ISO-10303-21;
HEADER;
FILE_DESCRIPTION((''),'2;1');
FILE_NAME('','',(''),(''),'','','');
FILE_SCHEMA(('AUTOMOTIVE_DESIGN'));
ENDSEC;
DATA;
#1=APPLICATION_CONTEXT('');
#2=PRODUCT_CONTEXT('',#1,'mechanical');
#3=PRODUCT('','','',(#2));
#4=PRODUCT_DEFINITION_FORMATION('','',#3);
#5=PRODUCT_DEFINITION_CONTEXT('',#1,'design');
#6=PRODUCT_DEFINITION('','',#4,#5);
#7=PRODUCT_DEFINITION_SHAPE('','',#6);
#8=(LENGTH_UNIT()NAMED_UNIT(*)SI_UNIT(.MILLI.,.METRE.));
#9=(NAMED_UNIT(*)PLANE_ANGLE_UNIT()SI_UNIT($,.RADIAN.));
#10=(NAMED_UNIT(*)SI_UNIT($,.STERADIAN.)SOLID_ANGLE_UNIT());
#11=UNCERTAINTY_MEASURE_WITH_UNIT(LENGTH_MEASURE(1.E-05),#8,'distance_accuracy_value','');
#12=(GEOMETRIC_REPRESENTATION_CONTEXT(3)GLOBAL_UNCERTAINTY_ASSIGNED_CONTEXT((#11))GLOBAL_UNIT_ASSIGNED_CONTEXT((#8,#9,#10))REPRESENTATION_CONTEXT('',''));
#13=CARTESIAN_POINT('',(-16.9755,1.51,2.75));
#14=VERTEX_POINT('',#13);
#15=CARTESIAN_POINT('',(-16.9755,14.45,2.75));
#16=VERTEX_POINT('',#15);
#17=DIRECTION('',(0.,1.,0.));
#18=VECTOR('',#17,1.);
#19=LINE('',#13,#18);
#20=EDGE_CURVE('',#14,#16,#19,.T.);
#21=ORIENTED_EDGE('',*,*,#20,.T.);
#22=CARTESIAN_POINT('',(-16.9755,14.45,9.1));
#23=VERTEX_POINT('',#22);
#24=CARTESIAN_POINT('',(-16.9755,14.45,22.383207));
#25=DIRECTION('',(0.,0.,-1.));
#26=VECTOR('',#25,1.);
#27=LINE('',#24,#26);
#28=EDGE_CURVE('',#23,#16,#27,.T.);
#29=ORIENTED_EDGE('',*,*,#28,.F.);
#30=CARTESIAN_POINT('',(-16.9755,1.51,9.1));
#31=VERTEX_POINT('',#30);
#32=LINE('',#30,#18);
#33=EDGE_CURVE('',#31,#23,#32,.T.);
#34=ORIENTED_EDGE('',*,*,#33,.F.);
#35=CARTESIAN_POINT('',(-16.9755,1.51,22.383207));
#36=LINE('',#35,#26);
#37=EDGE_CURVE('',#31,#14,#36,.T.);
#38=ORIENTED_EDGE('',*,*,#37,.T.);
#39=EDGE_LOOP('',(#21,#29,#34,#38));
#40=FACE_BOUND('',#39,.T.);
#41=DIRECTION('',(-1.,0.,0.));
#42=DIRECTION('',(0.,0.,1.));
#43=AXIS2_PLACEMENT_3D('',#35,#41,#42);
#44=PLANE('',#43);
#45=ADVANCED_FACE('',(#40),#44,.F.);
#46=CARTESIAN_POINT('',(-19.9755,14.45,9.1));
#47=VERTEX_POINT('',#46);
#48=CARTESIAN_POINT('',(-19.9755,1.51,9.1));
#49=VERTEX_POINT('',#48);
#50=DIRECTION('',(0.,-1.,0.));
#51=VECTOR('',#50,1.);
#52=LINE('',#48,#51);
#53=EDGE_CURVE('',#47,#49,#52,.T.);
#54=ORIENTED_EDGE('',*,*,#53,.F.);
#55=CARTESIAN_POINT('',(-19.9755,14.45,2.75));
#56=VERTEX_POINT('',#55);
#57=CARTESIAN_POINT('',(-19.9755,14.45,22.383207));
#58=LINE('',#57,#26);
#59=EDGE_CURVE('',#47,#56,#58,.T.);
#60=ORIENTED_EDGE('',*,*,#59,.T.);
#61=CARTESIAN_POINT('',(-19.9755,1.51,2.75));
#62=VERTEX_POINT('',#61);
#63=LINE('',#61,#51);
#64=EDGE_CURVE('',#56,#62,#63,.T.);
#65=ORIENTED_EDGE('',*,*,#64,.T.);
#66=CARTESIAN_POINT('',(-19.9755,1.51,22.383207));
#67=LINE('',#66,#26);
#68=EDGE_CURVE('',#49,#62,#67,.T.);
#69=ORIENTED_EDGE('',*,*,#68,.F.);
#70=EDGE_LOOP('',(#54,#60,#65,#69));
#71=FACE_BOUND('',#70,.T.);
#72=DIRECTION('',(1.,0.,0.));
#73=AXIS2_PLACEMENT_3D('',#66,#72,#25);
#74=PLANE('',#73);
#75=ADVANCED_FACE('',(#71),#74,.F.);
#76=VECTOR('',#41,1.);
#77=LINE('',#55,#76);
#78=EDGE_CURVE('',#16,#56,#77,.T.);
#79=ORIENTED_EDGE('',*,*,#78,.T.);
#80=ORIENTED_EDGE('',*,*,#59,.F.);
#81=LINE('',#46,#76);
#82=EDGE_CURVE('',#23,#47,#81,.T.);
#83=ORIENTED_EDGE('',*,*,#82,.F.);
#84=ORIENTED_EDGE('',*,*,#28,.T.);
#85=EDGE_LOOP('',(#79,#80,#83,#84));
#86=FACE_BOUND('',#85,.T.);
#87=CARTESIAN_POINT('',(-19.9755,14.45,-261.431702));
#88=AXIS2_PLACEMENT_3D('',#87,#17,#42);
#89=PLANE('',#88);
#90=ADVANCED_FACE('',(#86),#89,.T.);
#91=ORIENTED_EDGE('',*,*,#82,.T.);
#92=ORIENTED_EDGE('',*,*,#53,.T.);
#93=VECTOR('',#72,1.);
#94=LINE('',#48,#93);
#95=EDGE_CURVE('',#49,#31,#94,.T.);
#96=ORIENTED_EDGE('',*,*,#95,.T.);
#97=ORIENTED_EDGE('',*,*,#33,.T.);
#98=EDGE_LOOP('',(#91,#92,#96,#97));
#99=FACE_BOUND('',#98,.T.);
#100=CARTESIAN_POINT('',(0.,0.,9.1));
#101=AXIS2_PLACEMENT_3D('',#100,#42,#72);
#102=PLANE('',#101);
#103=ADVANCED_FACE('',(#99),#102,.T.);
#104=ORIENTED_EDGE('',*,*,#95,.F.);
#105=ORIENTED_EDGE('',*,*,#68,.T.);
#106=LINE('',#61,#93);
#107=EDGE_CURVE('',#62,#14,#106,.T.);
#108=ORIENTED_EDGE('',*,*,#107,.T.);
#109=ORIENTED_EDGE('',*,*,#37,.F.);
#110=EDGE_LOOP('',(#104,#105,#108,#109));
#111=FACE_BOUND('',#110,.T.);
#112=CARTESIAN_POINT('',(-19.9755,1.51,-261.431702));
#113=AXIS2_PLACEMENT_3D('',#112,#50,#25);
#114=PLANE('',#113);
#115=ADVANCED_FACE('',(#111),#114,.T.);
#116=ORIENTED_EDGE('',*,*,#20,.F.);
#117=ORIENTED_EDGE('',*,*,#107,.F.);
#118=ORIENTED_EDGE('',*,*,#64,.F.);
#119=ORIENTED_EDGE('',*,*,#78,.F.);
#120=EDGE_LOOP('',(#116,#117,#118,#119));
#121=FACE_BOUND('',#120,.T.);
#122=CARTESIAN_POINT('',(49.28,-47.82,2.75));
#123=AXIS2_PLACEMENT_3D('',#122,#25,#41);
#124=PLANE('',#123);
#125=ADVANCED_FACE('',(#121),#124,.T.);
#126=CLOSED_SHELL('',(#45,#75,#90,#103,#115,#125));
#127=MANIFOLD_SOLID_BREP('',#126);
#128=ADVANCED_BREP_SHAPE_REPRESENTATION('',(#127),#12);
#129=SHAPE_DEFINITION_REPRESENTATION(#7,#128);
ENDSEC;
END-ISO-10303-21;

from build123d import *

# Parameters (mm, degrees)
SKETCH1_W                                    = 184.15
SKETCH1_H                                    = 184.15
PANEL_DEPTH                                  = 2.75
LED_HOLE_REACH                               = 132.243
SKETCH19_R                                   = 2.75
LED_HOLES_PATTERN_COUNT                      = 13
LED_HOLES_PATTERN_PITCH                      = 12.319
LED_HOLES_PATTERN_COUNT_DIR2                 = 10
LED_HOLES_PATTERN_PITCH_DIR2                 = 15.94
SKETCH2_R                                    = 2.75
SKETCH2_W                                    = 4.99243385
SKETCH2_H                                    = 2.307727076
CORNER_LEDS_LIGHT_SENSOR_CUT_DEPTH           = 131.242749318
LIGHT_SENSOR_HOLDER_DEPTH                    = 2.4
SKETCH6_W                                    = 164.47360298
SKETCH6_H                                    = 161.542860252
OUTER_LIGHT_WALLS_DEPTH                      = 6.35
SKETCH7_W                                    = 158.47360298
SKETCH7_H                                    = 155.542860252
OUTER_LIGHT_WALLS_CUT_DEPTH                  = 7.5
SKETCH8_W                                    = 158.47560298
SKETCH8_H                                    = 3
INNER_H_WALLS_DEPTH                          = 7.5
INNER_H_WALLS_PATTERN_COUNT                  = 9
INNER_H_WALLS_PATTERN_PITCH                  = 15.94
INNER_START                                  = -1.15
INNER_V_WALLS_1ST_LINE_DEPTH                 = 7.5
INNER_V_WALLS_PATTERN_1ST_LINE_COUNT         = 12
INNER_V_WALLS_PATTERN_1ST_LINE_PITCH         = 12.32
SKETCH13_W                                   = 3
SKETCH13_H                                   = 12.501430126
EXTRA_V_WALLS_REMOVAL_1ST_LINE_DEPTH         = 7.5
SKETCH14_W                                   = 3
SKETCH14_H                                   = 12.94
INNER_V_WALLS_DEPTH                          = 6.35
INNER_V_WALLS_PATTERN_COUNT                  = 12
INNER_V_WALLS_PATTERN_PITCH                  = 12.32
INNER_V_WALLS_PATTERN_COUNT_DIR2             = 9
INNER_V_WALLS_PATTERN_PITCH_DIR2             = 15.94
SKETCH15_W                                   = 3
SKETCH15_H                                   = 12.94
EXTRA_V_WALLS_REMOVAL_DEPTH                  = 7.5
SKETCH16_W                                   = 6.43819851
SKETCH16_H                                   = 3
SKETCH16_W_2                                 = 3
SKETCH16_H_2                                 = 7.903569874
CORNER_LED_LIGHT_BAFFLES_DEPTH               = 6.35
CORNER_LED_LIGHT_BAFFLES_MIRROR_2_COPY_1_W   = 6.43819851
CORNER_LED_LIGHT_BAFFLES_MIRROR_2_COPY_1_H   = 3
CORNER_LED_LIGHT_BAFFLES_MIRROR_2_COPY_1_W_2 = 3
CORNER_LED_LIGHT_BAFFLES_MIRROR_2_COPY_1_H_2 = 7.903569874
CORNER_LED_LIGHT_BAFFLES_MIRROR_2_CO_2_DEPTH = 6.35
LED_STRIP_SQUARE_HOLE_1ST_LINE_REACH         = 132.43
SKETCH20_W                                   = 5.5
SKETCH20_H                                   = 5.5
LED_STRIP_SQUARE_HOLE_REACH                  = 132.43
SKETCH22_W                                   = 5.5
SKETCH22_H                                   = 5.5
LED_STRIP_SQUARE_HOLES_PATTERN_COUNT         = 13
LED_STRIP_SQUARE_HOLES_PATTERN_PITCH         = 12.319
LED_STRIP_SQUARE_HOLES_PATTERN_COUNT_DIR2    = 6
LED_STRIP_SQUARE_HOLES_PATTERN_PITCH_DIR2    = 15.94
SKETCH27_W                                   = 149.47360298
SKETCH27_H                                   = 7.903569874
SKETCH27_W_2                                 = 6.43819851
SKETCH27_H_2                                 = 146.542860252
CUT_EXTRUDE15_DEPTH                          = 1
CHAMFER1_SIZE                                = 1
SKETCH30_OUTSIDE_W                           = 238.268
SKETCH30_OUTSIDE_H                           = 238.268
SKETCH30_OUTSIDE_W_2                         = 3
SKETCH30_OUTSIDE_H_2                         = 12.94
CUT_EXTRUDE24_DEPTH                          = 7.5


with BuildPart() as part:
    # Sketch1 → panel (new body)
    with BuildSketch(Plane.XY):
        Rectangle(SKETCH1_W, SKETCH1_H)
    extrude(amount=PANEL_DEPTH)

    # Sketch19 → LED hole (cut, up to next)
    with BuildSketch(Plane.XY.offset(2.75), mode=Mode.PRIVATE) as led_hole_sk1:
        with Locations((-73.915, 71.74)):
            Circle(SKETCH19_R)
    led_hole_tool1 = extrude(led_hole_sk1.sketch, amount=-LED_HOLE_REACH, mode=Mode.PRIVATE) & part.part
    led_hole = led_hole_tool1.solids().sort_by_distance((-73.915, 71.74, 2.75))[0]
    add(led_hole, mode=Mode.SUBTRACT)

    # LED holes pattern: LED hole 13 × 10, 32 skipped
    with Locations(*[(i * LED_HOLES_PATTERN_PITCH, -j * LED_HOLES_PATTERN_PITCH_DIR2, 0) for i in range(LED_HOLES_PATTERN_COUNT) for j in range(LED_HOLES_PATTERN_COUNT_DIR2) if (i, j) not in ((0, 0), (0, 3), (0, 4), (1, 3), (1, 4), (2, 0), (2, 3), (2, 4), (3, 3), (3, 4), (3, 6), (3, 8), (4, 2), (4, 3), (4, 4), (4, 6), (4, 8), (5, 0), (5, 3), (5, 4), (5, 6), (5, 8), (6, 3), (6, 4), (6, 6), (6, 8), (6, 9), (7, 4), (7, 8), (8, 8), (9, 8), (12, 2), (12, 6))]):
        add(led_hole, mode=Mode.SUBTRACT)

    # Sketch2 → corner LEDs _ light sensor cut (cut, through all)
    with BuildSketch(Plane.XY.offset(2.75)):
        with Locations((-84.075, 84.075)):
            Circle(SKETCH2_R)
        with Locations(Location((84.075, 84.075, 0), (0, 0, 180))):
            Circle(SKETCH2_R)
        with Locations((84.075, -84.075)):
            Circle(SKETCH2_R)
        with Locations(Location((-84.075, -84.075, 0), (0, 0, 180))):
            Circle(SKETCH2_R)
        with Locations((0, 84.075)):
            Rectangle(SKETCH2_W, SKETCH2_H)
    extrude(amount=-CORNER_LEDS_LIGHT_SENSOR_CUT_DEPTH, mode=Mode.SUBTRACT)

    # Sketch3 → light sensor holder (cut)
    with BuildSketch(Plane.XY.offset(2.75)):
        with BuildLine():
            Line((-1.58113883, 81.825), (1.58113883, 81.825))
            ThreePointArc((1.58113883, 81.825), (2.75, 84.075), (1.58113883, 86.325))
            Line((1.58113883, 86.325), (-1.58113883, 86.325))
            ThreePointArc((-1.58113883, 86.325), (-2.75, 84.075), (-1.58113883, 81.825))
        make_face()
    extrude(amount=-LIGHT_SENSOR_HOLDER_DEPTH, mode=Mode.SUBTRACT)

    # Sketch6 → outer light walls (add)
    with BuildSketch(Plane.XY.offset(2.75)):
        Rectangle(SKETCH6_W, SKETCH6_H)
    extrude(amount=OUTER_LIGHT_WALLS_DEPTH)

    # Sketch7 → outer light walls cut (cut)
    with BuildSketch(Plane.XY.offset(9.1)):
        Rectangle(SKETCH7_W, SKETCH7_H)
    extrude(amount=-OUTER_LIGHT_WALLS_CUT_DEPTH, mode=Mode.SUBTRACT)

    # Sketch8 → inner H walls (add)
    with BuildSketch(Plane.XY.offset(1.6)):
        with Locations((-0.001, 63.77)):
            Rectangle(SKETCH8_W, SKETCH8_H)
    inner_h_walls = extrude(amount=INNER_H_WALLS_DEPTH)

    # inner H walls pattern: inner H walls ×9
    with Locations(*[(0, -i * INNER_H_WALLS_PATTERN_PITCH, 0) for i in range(1, INNER_H_WALLS_PATTERN_COUNT)]):
        add(inner_h_walls)

    # Sketch12 → inner V walls _1st line (add)
    with BuildSketch(Plane.XY.offset(2.75).offset(INNER_START)):
        Polygon((-69.2555, 65.708569874), (-69.2555, 65.27), (-66.2555, 65.27), (-66.2555, 65.708569874), (-66.2555, 77.771430126), (-69.2555, 77.771430126), align=None)
    inner_v_walls_1st_line = extrude(amount=INNER_V_WALLS_1ST_LINE_DEPTH)

    # inner V walls pattern _1st line: inner V walls _1st line ×12, 6 skipped
    with Locations(*[(i * INNER_V_WALLS_PATTERN_1ST_LINE_PITCH, 0, 0) for i in range(1, INNER_V_WALLS_PATTERN_1ST_LINE_COUNT) if i not in (3, 6, 7, 9, 10, 11)]):
        add(inner_v_walls_1st_line)

    # Sketch13 → extra V walls removal _1st line (cut)
    with BuildSketch(Plane.XY.offset(9.1)):
        with Locations((-67.7555, 71.520715063)):
            Rectangle(SKETCH13_W, SKETCH13_H)
    extrude(amount=-EXTRA_V_WALLS_REMOVAL_1ST_LINE_DEPTH, mode=Mode.SUBTRACT)

    # Sketch14 → inner V walls (add)
    with BuildSketch(Plane.XY.offset(2.75)):
        with Locations((-67.7555, 55.8)):
            Rectangle(SKETCH14_W, SKETCH14_H)
    inner_v_walls = extrude(amount=INNER_V_WALLS_DEPTH)

    # inner V walls pattern: inner V walls 12 × 9, 86 skipped
    with Locations(*[(i * INNER_V_WALLS_PATTERN_PITCH, -j * INNER_V_WALLS_PATTERN_PITCH_DIR2, 0) for i in range(INNER_V_WALLS_PATTERN_COUNT) for j in range(INNER_V_WALLS_PATTERN_COUNT_DIR2) if (i, j) not in ((0, 0), (0, 1), (0, 2), (0, 3), (0, 4), (0, 5), (0, 6), (0, 7), (0, 8), (1, 0), (1, 1), (1, 2), (1, 3), (1, 4), (1, 5), (1, 6), (1, 7), (1, 8), (2, 0), (2, 1), (2, 2), (2, 3), (2, 4), (2, 6), (2, 8), (3, 0), (3, 2), (3, 3), (3, 4), (3, 5), (3, 7), (3, 8), (4, 0), (4, 4), (4, 5), (4, 6), (4, 7), (4, 8), (5, 0), (5, 1), (5, 2), (5, 3), (5, 5), (5, 6), (5, 7), (6, 1), (6, 3), (6, 4), (6, 6), (6, 7), (7, 0), (7, 1), (7, 2), (7, 4), (7, 5), (7, 6), (7, 7), (8, 0), (8, 1), (8, 2), (8, 3), (8, 4), (8, 5), (8, 7), (8, 8), (9, 0), (9, 1), (9, 2), (9, 3), (9, 5), (9, 6), (9, 8), (10, 0), (10, 1), (10, 3), (10, 4), (10, 5), (10, 6), (10, 7), (10, 8), (11, 0), (11, 2), (11, 3), (11, 4), (11, 6), (11, 7), (11, 8))]):
        add(inner_v_walls)

    # Sketch15 → extra V walls removal (cut)
    with BuildSketch(Plane.XY.offset(9.1)):
        with Locations((-67.7555, 55.8)):
            Rectangle(SKETCH15_W, SKETCH15_H)
    extrude(amount=-EXTRA_V_WALLS_REMOVAL_DEPTH, mode=Mode.SUBTRACT)

    # Sketch16 → corner LED light baffles (add)
    with BuildSketch(Plane.XY.offset(2.75)):
        with Locations((-85.455900745, 74.771430126)):
            Rectangle(SKETCH16_W, SKETCH16_H)
        with Locations((-76.23680149, 84.723215063)):
            Rectangle(SKETCH16_W_2, SKETCH16_H_2)
    corner_led_light_baffles = extrude(amount=CORNER_LED_LIGHT_BAFFLES_DEPTH)

    # corner LED light baffles mirror: corner LED light baffles across plane
    add(corner_led_light_baffles.mirror(Plane(origin=(0, 0, 0), x_dir=(0, 0, 1), z_dir=(1, 0, 0))))

    # corner LED light baffles mirror 2: corner LED light baffles across plane
    add(corner_led_light_baffles.mirror(Plane.ZX))

    # corner LED light baffles mirror 2 copy 1 → corner LED light baffles mirror 2 co 2 (add)
    with BuildSketch(Plane(origin=(0, 0, 2.75), x_dir=(-1, 0, 0), z_dir=(0, 0, 1))):
        with Locations((-85.455900745, 74.771430126)):
            Rectangle(CORNER_LED_LIGHT_BAFFLES_MIRROR_2_COPY_1_W, CORNER_LED_LIGHT_BAFFLES_MIRROR_2_COPY_1_H)
        with Locations((-76.23680149, 84.723215063)):
            Rectangle(CORNER_LED_LIGHT_BAFFLES_MIRROR_2_COPY_1_W_2, CORNER_LED_LIGHT_BAFFLES_MIRROR_2_COPY_1_H_2)
    extrude(amount=CORNER_LED_LIGHT_BAFFLES_MIRROR_2_CO_2_DEPTH)

    # Sketch20 → LED strip square hole _1st line (cut, up to next)
    with BuildSketch(Plane.XY.offset(1.6), mode=Mode.PRIVATE) as led_strip_square_hole_1st_line_sk1:
        with Locations((-49.2755, 71.520715063)):
            Rectangle(SKETCH20_W, SKETCH20_H)
    led_strip_square_hole_1st_line_tool1 = extrude(led_strip_square_hole_1st_line_sk1.sketch, amount=-LED_STRIP_SQUARE_HOLE_1ST_LINE_REACH, mode=Mode.PRIVATE) & part.part
    add(led_strip_square_hole_1st_line_tool1.solids().sort_by_distance((-49.2755, 71.520715, 1.6))[0], mode=Mode.SUBTRACT)

    # Sketch22 → LED strip square hole (cut, up to next)
    with BuildSketch(Plane.XY.offset(1.6), mode=Mode.PRIVATE) as led_strip_square_hole_sk1:
        with Locations((-73.915, 23.92)):
            Rectangle(SKETCH22_W, SKETCH22_H)
    led_strip_square_hole_tool1 = extrude(led_strip_square_hole_sk1.sketch, amount=-LED_STRIP_SQUARE_HOLE_REACH, mode=Mode.PRIVATE) & part.part
    led_strip_square_hole = led_strip_square_hole_tool1.solids().sort_by_distance((-73.915, 23.92, 1.6))[0]
    add(led_strip_square_hole, mode=Mode.SUBTRACT)

    # LED strip square holes pattern: LED strip square hole 13 × 6, 51 skipped
    with Locations(*[(i * LED_STRIP_SQUARE_HOLES_PATTERN_PITCH, -j * LED_STRIP_SQUARE_HOLES_PATTERN_PITCH_DIR2, 0) for i in range(LED_STRIP_SQUARE_HOLES_PATTERN_COUNT) for j in range(LED_STRIP_SQUARE_HOLES_PATTERN_COUNT_DIR2) if (i, j) not in ((0, 0), (0, 2), (0, 3), (0, 4), (0, 5), (1, 2), (1, 3), (1, 4), (1, 5), (2, 2), (2, 3), (2, 4), (2, 5), (3, 2), (3, 4), (4, 2), (4, 4), (5, 2), (5, 4), (6, 2), (6, 4), (7, 0), (7, 2), (7, 3), (7, 4), (8, 0), (8, 1), (8, 2), (8, 3), (8, 4), (9, 0), (9, 1), (9, 2), (9, 3), (9, 4), (10, 0), (10, 1), (10, 2), (10, 3), (10, 4), (10, 5), (11, 0), (11, 1), (11, 2), (11, 3), (11, 4), (11, 5), (12, 0), (12, 1), (12, 2), (12, 4), (12, 5))]):
        add(led_strip_square_hole, mode=Mode.SUBTRACT)

    # Sketch27 → Cut-Extrude15 (cut)
    with BuildSketch(Plane.XY.offset(2.75)):
        with Locations((0, 84.723215063)):
            Rectangle(SKETCH27_W, SKETCH27_H)
        with Locations((-85.455900745, 0)):
            Rectangle(SKETCH27_W_2, SKETCH27_H_2)
        with Locations((0, -84.723215063)):
            Rectangle(SKETCH27_W, SKETCH27_H)
        with Locations((85.455900745, 0)):
            Rectangle(SKETCH27_W_2, SKETCH27_H_2)
    extrude(amount=-CUT_EXTRUDE15_DEPTH, mode=Mode.SUBTRACT)

    # Chamfer1
    chamfer1_edges = [part.edges().sort_by_distance(p)[0] for p in [
        (-92.075, 0, 2.75),
        (0, -92.075, 2.75),
        (92.075, 0, 2.75),
        (0, 92.075, 2.75),
    ]]
    chamfer(chamfer1_edges, length=CHAMFER1_SIZE)

    # Sketch30 outside → Cut-Extrude24 (cut)
    with BuildSketch(Plane.XY.offset(9.1)):
        Rectangle(SKETCH30_OUTSIDE_W, SKETCH30_OUTSIDE_H)
        with Locations((-18.4755, 7.98)):
            Rectangle(SKETCH30_OUTSIDE_W_2, SKETCH30_OUTSIDE_H_2, mode=Mode.SUBTRACT)
    extrude(amount=-CUT_EXTRUDE24_DEPTH, mode=Mode.SUBTRACT)


with BuildPart() as cut_extrude24_kept_piece:
    # of the separate pieces the step leaves, the one the design keeps (cut_extrude24_pieces_kept)
    add(part.part.solids().sort_by_distance((-19.9755, 14.45, 2.75))[0])


solid = cut_extrude24_kept_piece.part
